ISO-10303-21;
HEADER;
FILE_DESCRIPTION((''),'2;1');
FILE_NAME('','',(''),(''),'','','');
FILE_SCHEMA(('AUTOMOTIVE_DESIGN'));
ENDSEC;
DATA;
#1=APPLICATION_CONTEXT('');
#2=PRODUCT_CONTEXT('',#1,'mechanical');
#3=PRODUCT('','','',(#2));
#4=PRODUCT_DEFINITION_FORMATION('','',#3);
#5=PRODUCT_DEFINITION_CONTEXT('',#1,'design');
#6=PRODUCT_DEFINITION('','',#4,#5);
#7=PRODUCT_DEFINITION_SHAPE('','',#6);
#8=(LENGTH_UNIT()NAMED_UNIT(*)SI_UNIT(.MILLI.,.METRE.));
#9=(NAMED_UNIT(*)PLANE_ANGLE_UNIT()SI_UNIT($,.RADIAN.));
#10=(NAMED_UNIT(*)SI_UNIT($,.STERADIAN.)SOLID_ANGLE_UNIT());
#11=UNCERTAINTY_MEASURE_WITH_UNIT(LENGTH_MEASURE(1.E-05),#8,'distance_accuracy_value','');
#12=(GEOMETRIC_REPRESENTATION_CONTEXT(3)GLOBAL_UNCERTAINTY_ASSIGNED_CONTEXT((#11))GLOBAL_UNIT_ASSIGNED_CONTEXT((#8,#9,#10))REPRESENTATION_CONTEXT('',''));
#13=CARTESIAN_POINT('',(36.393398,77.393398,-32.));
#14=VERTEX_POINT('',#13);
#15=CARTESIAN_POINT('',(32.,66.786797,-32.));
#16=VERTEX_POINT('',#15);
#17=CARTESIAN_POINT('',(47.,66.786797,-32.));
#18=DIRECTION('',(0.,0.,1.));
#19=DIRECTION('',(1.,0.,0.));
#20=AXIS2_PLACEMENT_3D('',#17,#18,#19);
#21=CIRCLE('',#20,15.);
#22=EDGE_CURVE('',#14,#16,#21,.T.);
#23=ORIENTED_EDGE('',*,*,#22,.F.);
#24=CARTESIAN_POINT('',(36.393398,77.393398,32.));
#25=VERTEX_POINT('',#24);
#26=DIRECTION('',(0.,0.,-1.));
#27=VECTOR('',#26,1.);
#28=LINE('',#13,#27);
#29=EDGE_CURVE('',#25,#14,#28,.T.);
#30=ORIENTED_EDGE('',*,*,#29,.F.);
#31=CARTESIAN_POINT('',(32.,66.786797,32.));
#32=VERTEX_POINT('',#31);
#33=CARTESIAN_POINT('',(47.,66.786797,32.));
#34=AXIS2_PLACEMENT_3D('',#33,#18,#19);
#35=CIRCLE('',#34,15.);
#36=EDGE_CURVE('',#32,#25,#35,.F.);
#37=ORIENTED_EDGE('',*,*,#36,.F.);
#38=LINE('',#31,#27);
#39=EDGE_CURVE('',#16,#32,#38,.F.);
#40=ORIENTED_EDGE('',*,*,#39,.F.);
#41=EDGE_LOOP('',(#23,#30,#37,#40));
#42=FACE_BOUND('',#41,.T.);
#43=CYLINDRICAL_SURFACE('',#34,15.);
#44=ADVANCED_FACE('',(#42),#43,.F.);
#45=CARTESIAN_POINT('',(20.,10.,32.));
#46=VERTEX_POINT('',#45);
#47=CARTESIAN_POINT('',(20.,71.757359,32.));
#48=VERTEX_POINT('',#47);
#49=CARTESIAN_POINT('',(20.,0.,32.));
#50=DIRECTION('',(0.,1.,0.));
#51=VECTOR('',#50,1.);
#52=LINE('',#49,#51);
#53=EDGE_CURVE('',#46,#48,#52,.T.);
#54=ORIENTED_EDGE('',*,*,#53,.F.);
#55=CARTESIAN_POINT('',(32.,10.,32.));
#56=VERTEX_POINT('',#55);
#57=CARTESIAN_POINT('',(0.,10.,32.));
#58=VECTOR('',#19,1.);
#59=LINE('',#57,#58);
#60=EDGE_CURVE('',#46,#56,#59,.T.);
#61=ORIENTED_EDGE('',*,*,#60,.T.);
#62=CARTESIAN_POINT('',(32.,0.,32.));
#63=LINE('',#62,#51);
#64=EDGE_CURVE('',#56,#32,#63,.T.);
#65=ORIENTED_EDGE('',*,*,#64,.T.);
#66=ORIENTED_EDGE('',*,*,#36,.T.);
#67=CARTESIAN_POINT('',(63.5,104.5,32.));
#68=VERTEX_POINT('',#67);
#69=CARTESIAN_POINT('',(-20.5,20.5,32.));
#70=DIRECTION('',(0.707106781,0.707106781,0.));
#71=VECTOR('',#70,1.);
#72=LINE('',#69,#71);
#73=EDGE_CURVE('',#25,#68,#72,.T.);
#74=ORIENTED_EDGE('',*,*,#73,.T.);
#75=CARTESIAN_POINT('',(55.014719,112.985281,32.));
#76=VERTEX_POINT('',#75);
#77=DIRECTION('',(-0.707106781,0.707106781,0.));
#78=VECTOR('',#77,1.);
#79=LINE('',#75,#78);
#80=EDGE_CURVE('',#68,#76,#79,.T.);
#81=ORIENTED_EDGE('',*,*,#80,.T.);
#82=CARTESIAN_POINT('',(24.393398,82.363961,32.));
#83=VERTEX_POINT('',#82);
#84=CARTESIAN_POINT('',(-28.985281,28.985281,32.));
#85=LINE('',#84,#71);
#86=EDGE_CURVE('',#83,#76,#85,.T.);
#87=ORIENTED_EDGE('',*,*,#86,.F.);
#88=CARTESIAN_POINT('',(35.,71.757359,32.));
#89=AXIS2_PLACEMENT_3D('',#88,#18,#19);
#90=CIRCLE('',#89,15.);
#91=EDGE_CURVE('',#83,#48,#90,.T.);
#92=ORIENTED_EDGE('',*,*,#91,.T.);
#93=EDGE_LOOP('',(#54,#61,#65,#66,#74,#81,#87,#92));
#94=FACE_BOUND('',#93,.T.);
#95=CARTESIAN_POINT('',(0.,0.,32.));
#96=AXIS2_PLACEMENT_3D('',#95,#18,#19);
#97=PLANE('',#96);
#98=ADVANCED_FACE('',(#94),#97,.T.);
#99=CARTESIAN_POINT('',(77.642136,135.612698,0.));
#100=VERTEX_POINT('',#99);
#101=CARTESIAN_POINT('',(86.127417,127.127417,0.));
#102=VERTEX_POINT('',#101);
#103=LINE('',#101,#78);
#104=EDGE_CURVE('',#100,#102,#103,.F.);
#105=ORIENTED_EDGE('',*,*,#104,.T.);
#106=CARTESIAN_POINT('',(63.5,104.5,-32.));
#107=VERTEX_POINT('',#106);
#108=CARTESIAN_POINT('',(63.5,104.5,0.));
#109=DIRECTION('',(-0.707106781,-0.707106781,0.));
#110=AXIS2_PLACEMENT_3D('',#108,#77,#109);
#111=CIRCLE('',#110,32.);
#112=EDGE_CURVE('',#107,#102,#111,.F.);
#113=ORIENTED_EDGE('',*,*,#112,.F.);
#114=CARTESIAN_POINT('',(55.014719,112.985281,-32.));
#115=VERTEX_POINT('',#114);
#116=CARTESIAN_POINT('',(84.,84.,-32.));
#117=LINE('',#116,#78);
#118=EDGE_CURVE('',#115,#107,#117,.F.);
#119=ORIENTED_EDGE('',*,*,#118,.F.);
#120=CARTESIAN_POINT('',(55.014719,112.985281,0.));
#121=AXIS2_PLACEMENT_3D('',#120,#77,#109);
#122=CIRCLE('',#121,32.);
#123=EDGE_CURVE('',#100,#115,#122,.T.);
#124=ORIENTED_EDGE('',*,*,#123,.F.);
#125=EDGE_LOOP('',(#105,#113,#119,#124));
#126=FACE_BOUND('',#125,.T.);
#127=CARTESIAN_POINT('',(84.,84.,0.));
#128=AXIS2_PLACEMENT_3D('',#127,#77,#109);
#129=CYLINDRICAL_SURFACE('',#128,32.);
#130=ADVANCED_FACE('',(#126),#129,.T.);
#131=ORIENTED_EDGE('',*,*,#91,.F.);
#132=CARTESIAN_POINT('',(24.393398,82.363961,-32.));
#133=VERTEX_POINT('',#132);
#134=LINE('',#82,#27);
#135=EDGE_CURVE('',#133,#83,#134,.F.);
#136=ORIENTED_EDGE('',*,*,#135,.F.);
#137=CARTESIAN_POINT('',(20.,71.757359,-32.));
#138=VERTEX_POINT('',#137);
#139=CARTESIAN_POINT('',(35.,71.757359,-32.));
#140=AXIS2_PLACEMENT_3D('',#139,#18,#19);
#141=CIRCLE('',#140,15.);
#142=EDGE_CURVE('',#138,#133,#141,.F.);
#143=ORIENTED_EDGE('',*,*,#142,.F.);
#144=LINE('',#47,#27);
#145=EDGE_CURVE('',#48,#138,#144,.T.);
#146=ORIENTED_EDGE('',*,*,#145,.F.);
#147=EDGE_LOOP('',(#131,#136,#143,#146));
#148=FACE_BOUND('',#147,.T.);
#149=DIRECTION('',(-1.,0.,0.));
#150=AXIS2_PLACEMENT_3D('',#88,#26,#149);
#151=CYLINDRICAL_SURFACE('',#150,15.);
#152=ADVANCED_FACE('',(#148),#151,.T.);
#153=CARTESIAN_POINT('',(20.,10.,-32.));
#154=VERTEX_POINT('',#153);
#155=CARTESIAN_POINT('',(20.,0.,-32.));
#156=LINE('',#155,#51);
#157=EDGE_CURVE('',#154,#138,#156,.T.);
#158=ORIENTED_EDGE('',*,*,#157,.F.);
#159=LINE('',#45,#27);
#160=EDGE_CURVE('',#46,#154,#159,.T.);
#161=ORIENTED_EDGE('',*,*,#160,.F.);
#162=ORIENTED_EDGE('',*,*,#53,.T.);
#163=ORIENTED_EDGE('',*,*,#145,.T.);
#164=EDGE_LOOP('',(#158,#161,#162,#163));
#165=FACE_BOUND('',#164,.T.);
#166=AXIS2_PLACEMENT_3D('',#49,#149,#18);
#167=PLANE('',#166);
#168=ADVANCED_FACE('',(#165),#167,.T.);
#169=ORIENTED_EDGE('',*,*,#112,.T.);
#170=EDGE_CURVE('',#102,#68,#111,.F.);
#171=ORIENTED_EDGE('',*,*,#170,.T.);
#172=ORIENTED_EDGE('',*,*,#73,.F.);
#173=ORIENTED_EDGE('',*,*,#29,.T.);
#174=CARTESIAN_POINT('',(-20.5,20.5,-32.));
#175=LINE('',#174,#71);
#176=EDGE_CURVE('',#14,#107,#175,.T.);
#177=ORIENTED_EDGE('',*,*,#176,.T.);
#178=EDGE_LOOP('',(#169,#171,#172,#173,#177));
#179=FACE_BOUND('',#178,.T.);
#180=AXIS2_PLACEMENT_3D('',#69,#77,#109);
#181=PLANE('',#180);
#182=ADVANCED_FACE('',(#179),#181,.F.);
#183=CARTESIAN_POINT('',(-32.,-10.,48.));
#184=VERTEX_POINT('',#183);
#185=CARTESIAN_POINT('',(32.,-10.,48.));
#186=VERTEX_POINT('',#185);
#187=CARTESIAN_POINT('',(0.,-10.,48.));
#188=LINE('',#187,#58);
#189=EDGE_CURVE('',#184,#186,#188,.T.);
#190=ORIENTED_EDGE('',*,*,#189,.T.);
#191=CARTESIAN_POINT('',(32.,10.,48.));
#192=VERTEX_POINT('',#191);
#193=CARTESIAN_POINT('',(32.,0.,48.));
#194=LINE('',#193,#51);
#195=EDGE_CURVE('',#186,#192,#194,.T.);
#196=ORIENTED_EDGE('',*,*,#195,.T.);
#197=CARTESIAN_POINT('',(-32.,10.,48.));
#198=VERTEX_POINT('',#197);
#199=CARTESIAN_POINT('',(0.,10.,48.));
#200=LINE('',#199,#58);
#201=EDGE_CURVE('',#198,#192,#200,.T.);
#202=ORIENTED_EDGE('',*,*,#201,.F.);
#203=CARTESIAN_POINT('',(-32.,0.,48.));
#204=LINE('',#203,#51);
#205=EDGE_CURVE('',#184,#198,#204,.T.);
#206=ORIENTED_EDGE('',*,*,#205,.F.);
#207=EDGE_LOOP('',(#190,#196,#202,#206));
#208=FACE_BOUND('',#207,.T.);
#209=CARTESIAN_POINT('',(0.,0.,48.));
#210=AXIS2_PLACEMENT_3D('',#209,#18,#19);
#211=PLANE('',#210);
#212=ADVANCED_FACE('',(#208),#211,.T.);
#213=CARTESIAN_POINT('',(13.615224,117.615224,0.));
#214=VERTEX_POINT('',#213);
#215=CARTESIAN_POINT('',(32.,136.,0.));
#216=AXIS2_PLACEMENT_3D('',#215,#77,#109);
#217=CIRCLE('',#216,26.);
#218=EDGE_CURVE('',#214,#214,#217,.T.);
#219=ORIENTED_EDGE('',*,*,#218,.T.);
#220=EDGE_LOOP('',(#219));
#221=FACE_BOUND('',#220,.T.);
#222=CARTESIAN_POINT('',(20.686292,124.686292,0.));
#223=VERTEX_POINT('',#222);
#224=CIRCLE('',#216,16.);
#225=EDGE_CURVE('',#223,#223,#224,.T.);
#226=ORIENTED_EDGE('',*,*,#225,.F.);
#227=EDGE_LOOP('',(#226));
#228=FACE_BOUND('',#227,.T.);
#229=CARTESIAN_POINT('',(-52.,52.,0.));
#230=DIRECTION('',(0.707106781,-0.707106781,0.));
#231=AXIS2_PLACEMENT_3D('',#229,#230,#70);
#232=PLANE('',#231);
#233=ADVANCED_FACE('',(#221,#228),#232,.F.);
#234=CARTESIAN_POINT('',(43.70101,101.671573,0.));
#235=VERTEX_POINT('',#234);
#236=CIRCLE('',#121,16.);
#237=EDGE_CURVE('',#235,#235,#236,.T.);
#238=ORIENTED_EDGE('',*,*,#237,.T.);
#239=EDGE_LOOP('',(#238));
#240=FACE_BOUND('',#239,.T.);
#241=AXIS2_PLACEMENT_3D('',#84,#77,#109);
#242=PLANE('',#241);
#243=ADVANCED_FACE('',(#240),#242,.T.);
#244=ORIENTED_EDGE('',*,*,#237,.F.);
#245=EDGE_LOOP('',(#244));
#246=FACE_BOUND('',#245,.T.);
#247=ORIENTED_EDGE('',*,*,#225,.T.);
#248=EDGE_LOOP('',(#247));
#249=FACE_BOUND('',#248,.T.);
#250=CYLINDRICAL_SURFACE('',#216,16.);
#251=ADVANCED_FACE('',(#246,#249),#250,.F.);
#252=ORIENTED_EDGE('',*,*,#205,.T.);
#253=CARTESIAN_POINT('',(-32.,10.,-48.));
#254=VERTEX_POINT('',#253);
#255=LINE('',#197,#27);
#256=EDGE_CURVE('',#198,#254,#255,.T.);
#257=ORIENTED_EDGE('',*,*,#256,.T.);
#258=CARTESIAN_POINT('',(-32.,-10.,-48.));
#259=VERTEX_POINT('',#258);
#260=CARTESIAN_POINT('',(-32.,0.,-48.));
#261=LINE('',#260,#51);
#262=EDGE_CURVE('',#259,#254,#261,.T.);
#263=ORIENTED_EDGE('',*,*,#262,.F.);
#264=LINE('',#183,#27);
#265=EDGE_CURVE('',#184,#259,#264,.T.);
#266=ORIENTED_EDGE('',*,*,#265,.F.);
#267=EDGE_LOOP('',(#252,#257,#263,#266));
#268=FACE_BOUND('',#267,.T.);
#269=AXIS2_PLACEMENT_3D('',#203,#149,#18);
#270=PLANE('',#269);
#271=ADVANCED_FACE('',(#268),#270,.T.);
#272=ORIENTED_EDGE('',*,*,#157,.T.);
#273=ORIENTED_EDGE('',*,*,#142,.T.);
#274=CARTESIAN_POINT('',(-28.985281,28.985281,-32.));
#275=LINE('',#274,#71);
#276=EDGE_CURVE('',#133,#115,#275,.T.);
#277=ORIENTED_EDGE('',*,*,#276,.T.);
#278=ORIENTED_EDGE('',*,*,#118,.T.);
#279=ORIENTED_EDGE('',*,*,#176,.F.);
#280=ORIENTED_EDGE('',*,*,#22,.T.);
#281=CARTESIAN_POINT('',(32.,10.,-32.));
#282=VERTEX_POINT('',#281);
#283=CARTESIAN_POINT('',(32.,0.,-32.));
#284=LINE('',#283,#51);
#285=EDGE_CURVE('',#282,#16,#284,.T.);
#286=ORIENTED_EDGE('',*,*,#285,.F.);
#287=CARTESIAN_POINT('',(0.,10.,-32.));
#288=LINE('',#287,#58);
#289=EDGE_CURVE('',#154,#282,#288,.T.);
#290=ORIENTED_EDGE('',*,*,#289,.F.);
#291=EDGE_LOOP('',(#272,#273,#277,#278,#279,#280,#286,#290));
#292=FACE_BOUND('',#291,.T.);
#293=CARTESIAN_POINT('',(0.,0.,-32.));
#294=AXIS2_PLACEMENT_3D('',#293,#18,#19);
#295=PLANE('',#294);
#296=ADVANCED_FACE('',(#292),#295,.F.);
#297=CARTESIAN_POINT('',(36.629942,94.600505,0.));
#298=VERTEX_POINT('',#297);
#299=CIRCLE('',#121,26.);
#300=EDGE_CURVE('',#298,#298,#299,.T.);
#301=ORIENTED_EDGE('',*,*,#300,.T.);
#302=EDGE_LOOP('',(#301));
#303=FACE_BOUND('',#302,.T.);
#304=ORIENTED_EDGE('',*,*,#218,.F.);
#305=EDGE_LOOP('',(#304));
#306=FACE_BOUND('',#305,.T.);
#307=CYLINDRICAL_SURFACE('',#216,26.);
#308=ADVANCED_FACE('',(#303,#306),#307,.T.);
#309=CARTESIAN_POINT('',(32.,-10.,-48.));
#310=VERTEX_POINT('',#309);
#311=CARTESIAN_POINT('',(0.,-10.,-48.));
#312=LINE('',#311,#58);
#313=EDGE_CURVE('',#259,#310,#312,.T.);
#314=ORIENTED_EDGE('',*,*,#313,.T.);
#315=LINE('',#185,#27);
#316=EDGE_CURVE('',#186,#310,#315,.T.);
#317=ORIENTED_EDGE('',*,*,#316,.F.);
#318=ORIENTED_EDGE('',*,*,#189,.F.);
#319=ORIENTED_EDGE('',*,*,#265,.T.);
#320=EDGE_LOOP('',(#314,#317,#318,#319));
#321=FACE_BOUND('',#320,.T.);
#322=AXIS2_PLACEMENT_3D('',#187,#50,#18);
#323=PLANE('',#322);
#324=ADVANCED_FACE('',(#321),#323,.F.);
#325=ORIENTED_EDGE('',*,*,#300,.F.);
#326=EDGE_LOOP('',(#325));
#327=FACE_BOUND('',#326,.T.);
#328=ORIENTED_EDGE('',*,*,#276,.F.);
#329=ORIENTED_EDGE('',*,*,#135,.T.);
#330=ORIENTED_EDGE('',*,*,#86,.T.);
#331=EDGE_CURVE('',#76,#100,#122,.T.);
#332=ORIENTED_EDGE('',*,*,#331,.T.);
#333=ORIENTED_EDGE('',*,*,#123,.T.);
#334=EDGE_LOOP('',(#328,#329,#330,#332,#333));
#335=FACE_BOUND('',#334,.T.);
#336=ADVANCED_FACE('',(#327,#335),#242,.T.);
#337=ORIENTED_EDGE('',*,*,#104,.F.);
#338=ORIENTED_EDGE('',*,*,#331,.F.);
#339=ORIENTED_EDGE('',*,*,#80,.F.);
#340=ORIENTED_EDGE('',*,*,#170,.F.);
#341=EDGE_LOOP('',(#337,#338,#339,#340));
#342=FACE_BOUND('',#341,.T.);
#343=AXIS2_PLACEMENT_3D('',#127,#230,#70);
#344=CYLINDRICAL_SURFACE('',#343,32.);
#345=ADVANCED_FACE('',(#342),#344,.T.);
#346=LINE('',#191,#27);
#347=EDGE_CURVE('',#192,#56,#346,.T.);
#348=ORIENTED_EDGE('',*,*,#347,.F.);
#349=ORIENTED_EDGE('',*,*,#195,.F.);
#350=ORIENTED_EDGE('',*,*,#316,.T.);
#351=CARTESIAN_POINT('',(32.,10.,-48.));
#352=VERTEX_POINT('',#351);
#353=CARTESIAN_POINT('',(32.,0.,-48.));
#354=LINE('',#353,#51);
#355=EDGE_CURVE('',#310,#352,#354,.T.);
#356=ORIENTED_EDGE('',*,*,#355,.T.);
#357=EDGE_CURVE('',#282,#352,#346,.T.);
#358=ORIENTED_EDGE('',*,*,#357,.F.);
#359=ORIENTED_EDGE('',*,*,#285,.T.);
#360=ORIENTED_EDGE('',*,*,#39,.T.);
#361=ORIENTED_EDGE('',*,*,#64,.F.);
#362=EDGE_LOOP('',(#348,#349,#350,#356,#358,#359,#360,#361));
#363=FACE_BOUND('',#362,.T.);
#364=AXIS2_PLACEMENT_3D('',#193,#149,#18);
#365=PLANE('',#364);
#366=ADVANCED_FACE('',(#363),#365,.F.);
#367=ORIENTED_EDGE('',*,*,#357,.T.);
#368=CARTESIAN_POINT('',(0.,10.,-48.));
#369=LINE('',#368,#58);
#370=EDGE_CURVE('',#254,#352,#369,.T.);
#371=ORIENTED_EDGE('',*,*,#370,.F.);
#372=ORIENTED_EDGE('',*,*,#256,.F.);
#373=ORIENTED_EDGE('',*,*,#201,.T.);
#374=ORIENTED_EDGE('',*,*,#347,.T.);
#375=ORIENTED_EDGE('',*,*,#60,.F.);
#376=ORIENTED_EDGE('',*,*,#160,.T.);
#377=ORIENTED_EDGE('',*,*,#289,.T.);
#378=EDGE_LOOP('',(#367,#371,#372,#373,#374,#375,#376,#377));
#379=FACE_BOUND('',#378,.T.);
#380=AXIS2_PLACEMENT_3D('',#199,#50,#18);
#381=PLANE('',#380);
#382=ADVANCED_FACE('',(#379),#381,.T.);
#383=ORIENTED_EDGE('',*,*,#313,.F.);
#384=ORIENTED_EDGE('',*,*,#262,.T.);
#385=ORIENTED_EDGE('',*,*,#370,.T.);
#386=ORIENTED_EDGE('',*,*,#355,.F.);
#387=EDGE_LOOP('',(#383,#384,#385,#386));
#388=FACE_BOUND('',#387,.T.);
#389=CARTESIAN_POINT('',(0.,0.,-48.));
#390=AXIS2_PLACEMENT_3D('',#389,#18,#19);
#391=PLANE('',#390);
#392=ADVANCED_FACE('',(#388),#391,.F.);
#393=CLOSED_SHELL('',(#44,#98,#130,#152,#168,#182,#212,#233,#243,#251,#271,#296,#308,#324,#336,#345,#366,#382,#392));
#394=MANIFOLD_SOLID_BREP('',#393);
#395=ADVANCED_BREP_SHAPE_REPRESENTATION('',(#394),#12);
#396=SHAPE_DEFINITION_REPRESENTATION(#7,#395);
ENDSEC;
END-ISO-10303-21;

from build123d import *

# Parameters (mm, degrees)
SKETCH1_W           = 64
SKETCH1_H           = 20
BOSS_EXTRUDE1_DEPTH = 48
BOSS_EXTRUDE2_DEPTH = 32
FILLET2_R           = 32
FILLET3_R           = 15


with BuildPart() as part:
    # Sketch1 → Boss-Extrude1 (new, symmetric)
    with BuildSketch(Plane.XY):
        Rectangle(SKETCH1_W, SKETCH1_H)
    extrude(amount=BOSS_EXTRUDE1_DEPTH, both=True)

    # Sketch1<3> → Boss-Extrude2 (add, symmetric)
    with BuildSketch(Plane.XY):
        Polygon((20, 10), (32, 10), (32, 73), (86.127416998, 127.127416998), (77.642135624, 135.612698372), (73.399494937, 131.370057685), (66.328427125, 124.298989873), (55.014718626, 112.985281374), (20, 77.970562748), align=None)
    extrude(amount=BOSS_EXTRUDE2_DEPTH, both=True)

    # Fillet2
    fillet2_edges = [part.edges().sort_by_distance(p)[0] for p in [
        (81.884776311, 131.370057685, -32),
        (81.884776311, 131.370057685, 32),
    ]]
    fillet(fillet2_edges, radius=FILLET2_R - 0.0001)  # a hair under: the kernel refuses the full size

    # Fillet3
    fillet3_edges = [part.edges().sort_by_distance(p)[0] for p in [
        (32, 73, 0),
        (20, 77.970562748, 0),
    ]]
    fillet(fillet3_edges, radius=FILLET3_R)

    # Sketch1<5> one side → Revolve3 (revolve)
    with BuildSketch(Plane.XY, mode=Mode.PRIVATE) as revolve3_sk:
        Polygon((66.328427125, 124.298989873), (55.014718626, 112.985281374), (63.5, 104.5), (86.127416998, 127.127416998), (77.642135624, 135.612698372), (73.399494937, 131.370057685), align=None)
        Polygon((66.328427125, 124.298989873), (73.399494937, 131.370057685), (50.384776311, 154.384776311), (43.313708499, 147.313708499), align=None)
    revolve(revolve3_sk.sketch.rotate(Axis((32, 136, 0), (0.7071067811865483, -0.7071067811865467, 0)), 180), axis=Axis((32, 136, 0), (0.7071067811865483, -0.7071067811865467, 0)))


solid = part.part
